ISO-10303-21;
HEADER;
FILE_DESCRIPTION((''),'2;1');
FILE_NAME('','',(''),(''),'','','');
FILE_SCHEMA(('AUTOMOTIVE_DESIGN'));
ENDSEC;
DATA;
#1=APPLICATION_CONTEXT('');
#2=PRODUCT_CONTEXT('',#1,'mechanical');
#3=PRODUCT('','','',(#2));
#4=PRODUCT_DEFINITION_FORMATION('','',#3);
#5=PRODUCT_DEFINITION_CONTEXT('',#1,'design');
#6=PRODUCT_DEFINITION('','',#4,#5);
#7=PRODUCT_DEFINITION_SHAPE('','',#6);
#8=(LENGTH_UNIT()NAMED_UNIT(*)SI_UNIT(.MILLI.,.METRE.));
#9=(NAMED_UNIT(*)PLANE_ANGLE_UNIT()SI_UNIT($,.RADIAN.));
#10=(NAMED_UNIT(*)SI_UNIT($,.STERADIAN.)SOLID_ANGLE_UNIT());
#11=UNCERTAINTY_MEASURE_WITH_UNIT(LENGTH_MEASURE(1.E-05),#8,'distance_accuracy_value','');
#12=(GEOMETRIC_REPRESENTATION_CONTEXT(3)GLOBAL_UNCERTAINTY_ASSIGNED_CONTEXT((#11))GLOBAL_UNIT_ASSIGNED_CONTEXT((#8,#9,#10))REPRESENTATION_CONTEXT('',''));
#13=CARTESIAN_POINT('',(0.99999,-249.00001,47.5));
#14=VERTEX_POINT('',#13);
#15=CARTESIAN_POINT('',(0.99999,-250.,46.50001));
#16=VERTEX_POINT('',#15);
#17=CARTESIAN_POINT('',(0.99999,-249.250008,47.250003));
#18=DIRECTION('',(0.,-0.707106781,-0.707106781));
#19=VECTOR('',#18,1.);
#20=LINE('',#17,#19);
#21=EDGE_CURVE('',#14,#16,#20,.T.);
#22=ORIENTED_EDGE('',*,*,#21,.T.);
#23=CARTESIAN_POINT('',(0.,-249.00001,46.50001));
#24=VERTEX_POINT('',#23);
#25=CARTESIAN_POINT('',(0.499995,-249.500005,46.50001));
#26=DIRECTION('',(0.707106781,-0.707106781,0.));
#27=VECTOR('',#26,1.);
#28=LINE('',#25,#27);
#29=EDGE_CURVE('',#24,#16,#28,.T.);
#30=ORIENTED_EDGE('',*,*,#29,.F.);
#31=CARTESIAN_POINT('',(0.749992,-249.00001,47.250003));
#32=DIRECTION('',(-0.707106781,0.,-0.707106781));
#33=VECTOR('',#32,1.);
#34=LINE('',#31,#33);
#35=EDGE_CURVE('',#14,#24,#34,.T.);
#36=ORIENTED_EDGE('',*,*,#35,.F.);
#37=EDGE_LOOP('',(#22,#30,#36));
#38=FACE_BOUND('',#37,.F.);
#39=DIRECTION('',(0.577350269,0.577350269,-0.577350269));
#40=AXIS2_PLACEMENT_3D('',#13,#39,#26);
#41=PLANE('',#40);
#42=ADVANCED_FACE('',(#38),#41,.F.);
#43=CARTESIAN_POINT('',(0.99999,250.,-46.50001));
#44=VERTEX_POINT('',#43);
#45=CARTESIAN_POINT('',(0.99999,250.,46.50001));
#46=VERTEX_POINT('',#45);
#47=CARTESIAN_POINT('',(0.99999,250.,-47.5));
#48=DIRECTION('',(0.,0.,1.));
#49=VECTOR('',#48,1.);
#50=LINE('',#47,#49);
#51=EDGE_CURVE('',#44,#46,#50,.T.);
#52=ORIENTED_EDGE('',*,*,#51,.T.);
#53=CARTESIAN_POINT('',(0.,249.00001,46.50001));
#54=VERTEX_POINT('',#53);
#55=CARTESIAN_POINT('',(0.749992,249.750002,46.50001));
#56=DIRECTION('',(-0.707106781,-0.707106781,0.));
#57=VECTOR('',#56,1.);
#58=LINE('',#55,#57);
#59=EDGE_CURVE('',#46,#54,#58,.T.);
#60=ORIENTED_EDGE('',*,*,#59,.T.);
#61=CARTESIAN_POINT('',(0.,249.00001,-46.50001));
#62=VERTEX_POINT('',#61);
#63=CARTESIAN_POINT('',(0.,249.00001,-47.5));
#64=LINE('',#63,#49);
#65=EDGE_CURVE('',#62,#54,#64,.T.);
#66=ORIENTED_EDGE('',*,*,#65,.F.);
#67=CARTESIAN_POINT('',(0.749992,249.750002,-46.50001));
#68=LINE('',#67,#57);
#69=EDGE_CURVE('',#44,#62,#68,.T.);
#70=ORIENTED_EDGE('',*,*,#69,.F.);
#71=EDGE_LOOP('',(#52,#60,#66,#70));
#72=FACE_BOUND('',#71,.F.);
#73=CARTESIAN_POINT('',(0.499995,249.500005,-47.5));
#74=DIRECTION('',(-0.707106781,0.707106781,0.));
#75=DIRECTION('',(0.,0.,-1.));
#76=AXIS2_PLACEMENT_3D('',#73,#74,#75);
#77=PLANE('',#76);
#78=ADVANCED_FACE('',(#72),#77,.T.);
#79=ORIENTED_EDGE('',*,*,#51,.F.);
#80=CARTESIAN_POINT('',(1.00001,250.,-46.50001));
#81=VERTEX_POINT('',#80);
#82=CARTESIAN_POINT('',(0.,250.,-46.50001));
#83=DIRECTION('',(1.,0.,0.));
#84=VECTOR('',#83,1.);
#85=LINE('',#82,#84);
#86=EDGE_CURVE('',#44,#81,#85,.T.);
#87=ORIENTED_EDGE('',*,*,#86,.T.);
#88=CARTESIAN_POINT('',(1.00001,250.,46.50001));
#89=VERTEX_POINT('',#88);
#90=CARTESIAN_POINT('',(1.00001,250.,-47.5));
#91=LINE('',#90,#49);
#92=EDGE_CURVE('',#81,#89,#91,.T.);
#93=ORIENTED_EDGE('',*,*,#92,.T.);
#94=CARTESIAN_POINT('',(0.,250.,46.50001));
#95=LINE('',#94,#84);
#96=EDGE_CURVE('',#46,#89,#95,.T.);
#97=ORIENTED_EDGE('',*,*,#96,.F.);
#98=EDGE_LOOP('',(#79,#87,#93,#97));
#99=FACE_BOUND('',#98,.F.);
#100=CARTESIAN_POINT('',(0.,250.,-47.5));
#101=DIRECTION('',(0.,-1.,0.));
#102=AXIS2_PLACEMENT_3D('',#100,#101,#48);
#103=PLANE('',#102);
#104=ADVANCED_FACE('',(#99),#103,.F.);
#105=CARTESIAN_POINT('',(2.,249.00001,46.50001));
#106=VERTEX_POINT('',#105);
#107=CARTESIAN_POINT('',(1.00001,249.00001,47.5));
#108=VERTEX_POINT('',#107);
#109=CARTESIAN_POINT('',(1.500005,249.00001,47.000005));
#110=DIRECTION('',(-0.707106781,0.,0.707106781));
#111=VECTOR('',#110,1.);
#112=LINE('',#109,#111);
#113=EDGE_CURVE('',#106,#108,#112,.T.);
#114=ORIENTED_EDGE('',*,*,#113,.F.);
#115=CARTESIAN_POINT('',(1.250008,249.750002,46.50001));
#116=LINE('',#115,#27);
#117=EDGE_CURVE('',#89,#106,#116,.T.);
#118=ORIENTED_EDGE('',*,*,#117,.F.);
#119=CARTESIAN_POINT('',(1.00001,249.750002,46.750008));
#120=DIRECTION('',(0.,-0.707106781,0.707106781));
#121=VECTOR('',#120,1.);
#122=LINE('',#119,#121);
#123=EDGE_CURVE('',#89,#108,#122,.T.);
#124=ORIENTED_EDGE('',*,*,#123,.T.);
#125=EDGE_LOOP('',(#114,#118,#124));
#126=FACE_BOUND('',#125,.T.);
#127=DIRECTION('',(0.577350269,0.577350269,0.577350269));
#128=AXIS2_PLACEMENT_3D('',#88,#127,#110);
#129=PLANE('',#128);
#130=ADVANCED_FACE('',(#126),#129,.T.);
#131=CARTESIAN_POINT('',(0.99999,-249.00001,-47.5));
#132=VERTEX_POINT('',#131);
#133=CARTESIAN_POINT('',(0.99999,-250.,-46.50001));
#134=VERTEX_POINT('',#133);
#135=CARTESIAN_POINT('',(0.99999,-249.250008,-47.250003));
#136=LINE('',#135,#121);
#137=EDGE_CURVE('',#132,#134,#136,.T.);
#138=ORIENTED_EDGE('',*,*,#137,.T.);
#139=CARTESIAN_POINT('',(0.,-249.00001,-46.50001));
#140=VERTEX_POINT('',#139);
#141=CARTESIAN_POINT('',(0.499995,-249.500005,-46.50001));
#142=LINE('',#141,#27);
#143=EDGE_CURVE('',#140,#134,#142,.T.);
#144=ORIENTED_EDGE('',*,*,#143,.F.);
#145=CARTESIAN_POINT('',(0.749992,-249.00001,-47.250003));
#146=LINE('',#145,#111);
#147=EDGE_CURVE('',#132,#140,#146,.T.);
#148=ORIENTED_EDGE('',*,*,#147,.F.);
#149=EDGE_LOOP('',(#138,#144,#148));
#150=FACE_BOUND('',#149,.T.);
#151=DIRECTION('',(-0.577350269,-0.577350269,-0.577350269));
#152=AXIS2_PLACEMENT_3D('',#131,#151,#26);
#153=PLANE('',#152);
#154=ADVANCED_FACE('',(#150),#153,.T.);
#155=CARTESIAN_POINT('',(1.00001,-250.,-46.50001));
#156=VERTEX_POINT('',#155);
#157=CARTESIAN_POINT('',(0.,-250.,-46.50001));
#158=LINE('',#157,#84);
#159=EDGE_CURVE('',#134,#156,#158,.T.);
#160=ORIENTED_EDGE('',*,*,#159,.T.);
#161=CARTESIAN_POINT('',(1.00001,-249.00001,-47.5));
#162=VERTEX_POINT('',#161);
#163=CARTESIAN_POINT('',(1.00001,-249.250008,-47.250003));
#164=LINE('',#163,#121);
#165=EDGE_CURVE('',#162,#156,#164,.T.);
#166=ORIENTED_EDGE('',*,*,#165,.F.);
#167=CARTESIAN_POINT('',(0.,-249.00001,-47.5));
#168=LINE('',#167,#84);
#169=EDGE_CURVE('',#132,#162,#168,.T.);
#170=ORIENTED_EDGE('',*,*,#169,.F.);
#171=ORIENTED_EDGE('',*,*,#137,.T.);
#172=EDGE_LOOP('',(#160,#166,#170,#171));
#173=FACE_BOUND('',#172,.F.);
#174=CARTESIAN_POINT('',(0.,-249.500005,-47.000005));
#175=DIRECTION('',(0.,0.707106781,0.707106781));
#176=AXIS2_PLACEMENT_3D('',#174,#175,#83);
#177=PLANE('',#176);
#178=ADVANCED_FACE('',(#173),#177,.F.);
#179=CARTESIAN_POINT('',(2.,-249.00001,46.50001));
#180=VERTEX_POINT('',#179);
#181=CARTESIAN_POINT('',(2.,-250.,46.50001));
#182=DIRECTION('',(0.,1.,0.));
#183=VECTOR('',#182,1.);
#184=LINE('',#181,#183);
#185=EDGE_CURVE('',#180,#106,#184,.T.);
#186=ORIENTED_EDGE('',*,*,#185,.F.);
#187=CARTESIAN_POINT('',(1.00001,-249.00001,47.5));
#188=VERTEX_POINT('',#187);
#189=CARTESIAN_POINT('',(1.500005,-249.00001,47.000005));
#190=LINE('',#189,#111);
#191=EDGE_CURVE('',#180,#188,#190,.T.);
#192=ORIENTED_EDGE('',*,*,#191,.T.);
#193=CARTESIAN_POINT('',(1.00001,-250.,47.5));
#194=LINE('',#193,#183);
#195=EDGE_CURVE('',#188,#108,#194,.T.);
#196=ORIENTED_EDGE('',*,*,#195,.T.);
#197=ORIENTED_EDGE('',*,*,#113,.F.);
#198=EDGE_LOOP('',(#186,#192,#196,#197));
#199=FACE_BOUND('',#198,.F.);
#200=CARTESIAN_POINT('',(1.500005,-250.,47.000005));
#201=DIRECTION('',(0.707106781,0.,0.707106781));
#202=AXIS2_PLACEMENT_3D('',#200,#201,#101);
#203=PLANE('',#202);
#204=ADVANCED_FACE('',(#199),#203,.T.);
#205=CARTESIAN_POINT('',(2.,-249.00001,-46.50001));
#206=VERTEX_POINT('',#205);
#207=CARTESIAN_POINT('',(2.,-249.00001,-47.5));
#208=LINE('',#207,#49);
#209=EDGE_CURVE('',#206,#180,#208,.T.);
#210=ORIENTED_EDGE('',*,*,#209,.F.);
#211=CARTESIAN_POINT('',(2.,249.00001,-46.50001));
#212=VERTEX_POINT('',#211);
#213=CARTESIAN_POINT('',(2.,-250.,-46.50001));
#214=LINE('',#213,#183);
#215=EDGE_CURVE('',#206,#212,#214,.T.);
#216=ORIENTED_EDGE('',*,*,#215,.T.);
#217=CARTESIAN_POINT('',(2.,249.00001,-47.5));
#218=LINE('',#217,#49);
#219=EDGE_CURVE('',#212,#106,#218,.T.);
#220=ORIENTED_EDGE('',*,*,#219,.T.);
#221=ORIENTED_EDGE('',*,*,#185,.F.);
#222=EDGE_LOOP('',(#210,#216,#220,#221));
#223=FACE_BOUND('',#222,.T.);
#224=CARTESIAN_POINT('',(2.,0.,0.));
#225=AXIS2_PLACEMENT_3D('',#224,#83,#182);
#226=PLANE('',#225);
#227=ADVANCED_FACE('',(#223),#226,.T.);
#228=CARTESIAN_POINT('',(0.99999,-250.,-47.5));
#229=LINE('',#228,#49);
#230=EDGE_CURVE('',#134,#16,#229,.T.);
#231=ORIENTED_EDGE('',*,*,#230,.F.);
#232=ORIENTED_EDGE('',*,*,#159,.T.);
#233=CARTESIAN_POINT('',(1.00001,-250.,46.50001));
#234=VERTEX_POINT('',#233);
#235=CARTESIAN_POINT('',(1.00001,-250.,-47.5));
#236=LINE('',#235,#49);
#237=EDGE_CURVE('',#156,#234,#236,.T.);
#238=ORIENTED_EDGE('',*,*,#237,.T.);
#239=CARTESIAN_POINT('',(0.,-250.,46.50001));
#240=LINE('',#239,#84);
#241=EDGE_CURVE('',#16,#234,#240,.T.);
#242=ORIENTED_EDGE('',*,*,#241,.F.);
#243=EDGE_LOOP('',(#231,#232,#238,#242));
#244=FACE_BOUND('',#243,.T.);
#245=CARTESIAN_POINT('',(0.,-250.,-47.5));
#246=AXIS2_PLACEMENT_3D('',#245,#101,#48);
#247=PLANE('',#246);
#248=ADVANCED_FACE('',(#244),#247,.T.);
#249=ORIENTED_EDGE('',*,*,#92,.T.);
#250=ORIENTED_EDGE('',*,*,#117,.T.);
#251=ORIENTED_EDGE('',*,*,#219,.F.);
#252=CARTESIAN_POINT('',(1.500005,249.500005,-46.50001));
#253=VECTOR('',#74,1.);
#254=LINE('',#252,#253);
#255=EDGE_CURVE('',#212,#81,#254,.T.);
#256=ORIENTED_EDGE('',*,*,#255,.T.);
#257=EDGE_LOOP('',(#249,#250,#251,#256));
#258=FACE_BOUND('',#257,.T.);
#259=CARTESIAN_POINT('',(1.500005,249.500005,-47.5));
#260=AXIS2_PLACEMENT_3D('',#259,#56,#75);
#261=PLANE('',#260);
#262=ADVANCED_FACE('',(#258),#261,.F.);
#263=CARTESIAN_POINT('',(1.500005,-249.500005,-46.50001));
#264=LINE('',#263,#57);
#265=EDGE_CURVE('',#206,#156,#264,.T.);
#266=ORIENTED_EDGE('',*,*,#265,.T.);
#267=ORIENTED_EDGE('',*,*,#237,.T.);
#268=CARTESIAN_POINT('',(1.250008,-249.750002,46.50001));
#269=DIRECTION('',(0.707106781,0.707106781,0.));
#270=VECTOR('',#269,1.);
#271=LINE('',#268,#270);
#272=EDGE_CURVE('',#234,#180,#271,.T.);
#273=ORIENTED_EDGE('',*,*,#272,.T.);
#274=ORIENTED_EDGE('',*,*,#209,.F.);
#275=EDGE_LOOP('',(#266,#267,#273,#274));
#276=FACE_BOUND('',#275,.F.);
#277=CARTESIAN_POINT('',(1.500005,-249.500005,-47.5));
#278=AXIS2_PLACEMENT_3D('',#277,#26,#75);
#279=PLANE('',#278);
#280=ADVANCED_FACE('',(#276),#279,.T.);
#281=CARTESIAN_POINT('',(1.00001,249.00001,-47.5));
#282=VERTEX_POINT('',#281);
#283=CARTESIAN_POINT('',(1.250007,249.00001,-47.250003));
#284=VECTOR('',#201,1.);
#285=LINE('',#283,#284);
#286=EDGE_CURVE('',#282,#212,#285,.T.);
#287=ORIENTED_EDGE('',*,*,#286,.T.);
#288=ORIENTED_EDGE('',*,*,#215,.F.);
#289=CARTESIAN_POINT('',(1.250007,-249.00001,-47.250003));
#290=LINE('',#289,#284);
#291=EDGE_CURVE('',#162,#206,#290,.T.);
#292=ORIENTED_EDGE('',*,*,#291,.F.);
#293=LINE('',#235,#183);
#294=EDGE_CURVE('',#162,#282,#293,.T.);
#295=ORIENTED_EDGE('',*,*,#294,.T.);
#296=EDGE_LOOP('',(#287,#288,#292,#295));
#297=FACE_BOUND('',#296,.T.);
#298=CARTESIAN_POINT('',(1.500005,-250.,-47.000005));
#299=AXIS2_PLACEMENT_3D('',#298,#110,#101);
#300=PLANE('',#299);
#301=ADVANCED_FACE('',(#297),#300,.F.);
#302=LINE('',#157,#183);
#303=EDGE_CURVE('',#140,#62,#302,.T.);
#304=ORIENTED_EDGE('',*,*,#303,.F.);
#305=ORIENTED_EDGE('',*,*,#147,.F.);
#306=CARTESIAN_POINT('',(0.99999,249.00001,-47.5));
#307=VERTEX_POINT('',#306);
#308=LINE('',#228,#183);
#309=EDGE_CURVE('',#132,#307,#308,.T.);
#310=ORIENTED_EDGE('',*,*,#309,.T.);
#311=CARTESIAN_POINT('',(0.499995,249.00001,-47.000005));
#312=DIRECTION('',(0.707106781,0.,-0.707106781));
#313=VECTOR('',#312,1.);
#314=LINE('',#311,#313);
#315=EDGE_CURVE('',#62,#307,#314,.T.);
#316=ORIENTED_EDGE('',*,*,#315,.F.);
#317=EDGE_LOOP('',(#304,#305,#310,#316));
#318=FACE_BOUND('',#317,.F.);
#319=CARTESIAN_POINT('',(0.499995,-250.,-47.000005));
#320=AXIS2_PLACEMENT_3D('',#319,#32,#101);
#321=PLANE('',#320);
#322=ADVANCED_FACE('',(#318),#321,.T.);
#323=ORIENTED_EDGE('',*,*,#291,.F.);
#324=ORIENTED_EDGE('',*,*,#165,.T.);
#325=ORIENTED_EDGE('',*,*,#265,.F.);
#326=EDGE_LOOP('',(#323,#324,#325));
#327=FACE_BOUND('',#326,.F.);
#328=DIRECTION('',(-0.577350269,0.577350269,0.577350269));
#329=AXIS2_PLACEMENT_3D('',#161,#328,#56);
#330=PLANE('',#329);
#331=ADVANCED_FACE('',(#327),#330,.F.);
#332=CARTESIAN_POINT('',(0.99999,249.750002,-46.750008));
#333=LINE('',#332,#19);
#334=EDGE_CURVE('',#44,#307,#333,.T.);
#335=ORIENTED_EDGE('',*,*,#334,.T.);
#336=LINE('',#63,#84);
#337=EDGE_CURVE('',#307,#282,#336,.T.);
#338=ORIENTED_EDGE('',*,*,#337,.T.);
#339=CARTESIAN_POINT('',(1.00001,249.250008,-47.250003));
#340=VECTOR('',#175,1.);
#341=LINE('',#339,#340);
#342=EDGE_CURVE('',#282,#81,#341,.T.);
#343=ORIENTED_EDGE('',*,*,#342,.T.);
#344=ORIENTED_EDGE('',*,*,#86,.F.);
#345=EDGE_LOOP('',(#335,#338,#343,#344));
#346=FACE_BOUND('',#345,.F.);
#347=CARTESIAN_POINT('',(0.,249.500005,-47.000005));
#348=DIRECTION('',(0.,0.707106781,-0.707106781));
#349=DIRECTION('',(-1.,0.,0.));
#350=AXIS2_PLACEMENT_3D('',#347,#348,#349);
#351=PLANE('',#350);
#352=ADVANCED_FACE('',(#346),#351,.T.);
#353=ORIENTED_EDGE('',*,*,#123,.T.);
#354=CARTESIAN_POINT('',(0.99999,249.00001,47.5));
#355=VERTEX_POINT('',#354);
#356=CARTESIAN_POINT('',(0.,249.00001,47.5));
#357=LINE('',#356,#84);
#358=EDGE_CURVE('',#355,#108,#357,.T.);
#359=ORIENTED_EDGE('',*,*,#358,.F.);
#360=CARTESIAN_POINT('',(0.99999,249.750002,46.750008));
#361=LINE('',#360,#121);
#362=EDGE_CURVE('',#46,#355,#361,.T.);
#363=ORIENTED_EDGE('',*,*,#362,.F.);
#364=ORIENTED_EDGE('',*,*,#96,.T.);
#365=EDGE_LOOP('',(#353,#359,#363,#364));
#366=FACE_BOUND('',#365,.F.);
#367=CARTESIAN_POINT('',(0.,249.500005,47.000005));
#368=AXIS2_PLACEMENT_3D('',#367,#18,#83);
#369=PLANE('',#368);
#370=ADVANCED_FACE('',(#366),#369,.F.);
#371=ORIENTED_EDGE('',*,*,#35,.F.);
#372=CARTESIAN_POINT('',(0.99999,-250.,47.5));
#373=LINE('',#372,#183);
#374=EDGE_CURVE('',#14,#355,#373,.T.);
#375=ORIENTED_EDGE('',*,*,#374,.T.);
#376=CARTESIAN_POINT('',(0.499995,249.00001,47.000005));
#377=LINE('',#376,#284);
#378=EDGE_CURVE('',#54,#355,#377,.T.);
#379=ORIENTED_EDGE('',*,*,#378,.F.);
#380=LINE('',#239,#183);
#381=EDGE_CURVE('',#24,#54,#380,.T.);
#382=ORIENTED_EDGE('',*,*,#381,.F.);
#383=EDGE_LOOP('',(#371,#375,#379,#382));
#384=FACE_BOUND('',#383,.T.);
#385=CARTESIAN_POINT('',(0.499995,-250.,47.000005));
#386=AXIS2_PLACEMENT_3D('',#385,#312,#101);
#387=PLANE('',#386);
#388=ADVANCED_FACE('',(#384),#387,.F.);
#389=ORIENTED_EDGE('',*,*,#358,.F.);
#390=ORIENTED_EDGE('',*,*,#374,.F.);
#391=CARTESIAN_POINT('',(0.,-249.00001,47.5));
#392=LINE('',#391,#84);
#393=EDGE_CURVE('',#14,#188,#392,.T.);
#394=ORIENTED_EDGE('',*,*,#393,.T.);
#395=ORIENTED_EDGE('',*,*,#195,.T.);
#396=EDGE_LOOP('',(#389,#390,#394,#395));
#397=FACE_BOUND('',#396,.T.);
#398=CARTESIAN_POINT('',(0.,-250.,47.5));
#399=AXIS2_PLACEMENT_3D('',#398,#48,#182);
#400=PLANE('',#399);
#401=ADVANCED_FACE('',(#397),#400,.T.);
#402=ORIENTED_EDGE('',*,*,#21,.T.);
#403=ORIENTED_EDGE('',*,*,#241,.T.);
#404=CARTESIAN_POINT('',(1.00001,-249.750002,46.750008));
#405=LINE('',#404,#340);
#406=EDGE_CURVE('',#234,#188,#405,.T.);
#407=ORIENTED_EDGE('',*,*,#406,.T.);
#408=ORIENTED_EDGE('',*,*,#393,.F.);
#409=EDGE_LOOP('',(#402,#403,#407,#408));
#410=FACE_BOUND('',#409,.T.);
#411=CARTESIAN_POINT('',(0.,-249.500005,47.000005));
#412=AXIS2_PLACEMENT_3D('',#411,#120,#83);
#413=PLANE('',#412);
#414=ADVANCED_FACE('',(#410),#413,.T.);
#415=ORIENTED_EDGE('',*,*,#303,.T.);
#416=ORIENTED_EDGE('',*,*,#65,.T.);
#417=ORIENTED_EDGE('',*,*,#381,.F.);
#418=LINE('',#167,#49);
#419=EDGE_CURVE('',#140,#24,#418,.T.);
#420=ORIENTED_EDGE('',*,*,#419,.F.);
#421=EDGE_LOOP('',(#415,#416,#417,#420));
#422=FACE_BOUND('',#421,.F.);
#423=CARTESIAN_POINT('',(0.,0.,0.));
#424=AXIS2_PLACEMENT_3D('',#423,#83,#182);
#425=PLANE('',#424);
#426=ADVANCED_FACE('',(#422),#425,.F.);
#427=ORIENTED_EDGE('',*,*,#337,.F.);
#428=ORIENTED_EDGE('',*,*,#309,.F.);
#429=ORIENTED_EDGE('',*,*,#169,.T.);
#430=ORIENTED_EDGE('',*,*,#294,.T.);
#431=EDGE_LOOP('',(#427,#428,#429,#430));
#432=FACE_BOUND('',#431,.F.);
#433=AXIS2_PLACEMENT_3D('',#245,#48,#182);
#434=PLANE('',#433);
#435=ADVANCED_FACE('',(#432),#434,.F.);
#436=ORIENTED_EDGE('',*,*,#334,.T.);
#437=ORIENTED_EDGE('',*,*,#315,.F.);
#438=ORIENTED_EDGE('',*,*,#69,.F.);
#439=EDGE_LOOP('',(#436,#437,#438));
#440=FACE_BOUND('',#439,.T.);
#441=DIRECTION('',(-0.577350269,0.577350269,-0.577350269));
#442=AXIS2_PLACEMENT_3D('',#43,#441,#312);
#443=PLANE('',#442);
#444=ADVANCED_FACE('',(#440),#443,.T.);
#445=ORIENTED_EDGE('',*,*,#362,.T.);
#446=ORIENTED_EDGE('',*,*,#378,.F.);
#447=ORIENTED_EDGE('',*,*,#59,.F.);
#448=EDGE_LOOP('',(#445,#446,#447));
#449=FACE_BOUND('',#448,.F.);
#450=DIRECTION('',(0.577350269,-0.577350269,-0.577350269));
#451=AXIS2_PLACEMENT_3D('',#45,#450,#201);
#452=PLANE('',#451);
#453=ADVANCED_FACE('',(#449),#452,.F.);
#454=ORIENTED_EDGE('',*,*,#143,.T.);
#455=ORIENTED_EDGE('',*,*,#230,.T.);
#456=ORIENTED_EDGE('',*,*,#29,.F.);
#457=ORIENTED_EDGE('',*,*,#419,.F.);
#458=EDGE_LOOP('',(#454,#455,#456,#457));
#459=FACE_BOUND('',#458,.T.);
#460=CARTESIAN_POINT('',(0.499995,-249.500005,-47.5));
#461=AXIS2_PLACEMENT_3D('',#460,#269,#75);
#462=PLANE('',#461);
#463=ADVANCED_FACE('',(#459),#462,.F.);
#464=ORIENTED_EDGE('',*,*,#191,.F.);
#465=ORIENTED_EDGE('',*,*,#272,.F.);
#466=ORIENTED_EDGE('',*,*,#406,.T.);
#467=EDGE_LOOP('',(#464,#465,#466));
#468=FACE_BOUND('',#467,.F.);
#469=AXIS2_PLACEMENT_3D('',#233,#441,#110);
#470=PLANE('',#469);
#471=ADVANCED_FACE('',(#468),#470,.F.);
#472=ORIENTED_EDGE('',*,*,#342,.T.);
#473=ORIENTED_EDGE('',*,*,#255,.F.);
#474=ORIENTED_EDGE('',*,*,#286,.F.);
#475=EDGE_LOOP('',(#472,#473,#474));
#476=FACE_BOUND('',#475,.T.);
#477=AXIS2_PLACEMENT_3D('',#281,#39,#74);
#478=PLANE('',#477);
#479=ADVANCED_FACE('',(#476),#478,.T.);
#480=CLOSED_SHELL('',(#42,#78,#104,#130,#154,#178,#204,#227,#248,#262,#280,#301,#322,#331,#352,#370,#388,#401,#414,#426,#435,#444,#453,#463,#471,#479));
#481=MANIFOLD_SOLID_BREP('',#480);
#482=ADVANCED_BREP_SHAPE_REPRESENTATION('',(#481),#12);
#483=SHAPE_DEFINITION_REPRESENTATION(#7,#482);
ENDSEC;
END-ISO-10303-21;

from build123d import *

# Parameters (mm, degrees)
F0_W     = 500
F0_H     = 95
F1_DEPTH = 2
F2_SIZE  = 0.99999


# Not quite as in the source:
# - a fillet or chamfer is up to 0.001 mm smaller than in the source, because OpenCascade refuses the exact size


with BuildPart() as f1:
    # F0 (on Right) → F1 (new body)
    with BuildSketch(Plane.YZ):
        Rectangle(F0_W, F0_H)
    extrude(amount=F1_DEPTH)

    # F2 (size 1 in the source; OpenCascade refuses exactly that, so slightly less here)
    f2_edges = [f1.edges().sort_by_distance(p)[0] for p in [
        (2, 0, 47.5),
        (2, -250, 0),
        (0, -250, 0),
        (0, 0, 47.5),
        (2, 250, 0),
        (0, 0, -47.5),
        (2, 0, -47.5),
        (0, 250, 0),
        (1, 250, 47.5),
        (1, -250, 47.5),
        (1, -250, -47.5),
        (1, 250, -47.5),
    ]]
    chamfer(f2_edges, length=F2_SIZE)


solid = f1.part
